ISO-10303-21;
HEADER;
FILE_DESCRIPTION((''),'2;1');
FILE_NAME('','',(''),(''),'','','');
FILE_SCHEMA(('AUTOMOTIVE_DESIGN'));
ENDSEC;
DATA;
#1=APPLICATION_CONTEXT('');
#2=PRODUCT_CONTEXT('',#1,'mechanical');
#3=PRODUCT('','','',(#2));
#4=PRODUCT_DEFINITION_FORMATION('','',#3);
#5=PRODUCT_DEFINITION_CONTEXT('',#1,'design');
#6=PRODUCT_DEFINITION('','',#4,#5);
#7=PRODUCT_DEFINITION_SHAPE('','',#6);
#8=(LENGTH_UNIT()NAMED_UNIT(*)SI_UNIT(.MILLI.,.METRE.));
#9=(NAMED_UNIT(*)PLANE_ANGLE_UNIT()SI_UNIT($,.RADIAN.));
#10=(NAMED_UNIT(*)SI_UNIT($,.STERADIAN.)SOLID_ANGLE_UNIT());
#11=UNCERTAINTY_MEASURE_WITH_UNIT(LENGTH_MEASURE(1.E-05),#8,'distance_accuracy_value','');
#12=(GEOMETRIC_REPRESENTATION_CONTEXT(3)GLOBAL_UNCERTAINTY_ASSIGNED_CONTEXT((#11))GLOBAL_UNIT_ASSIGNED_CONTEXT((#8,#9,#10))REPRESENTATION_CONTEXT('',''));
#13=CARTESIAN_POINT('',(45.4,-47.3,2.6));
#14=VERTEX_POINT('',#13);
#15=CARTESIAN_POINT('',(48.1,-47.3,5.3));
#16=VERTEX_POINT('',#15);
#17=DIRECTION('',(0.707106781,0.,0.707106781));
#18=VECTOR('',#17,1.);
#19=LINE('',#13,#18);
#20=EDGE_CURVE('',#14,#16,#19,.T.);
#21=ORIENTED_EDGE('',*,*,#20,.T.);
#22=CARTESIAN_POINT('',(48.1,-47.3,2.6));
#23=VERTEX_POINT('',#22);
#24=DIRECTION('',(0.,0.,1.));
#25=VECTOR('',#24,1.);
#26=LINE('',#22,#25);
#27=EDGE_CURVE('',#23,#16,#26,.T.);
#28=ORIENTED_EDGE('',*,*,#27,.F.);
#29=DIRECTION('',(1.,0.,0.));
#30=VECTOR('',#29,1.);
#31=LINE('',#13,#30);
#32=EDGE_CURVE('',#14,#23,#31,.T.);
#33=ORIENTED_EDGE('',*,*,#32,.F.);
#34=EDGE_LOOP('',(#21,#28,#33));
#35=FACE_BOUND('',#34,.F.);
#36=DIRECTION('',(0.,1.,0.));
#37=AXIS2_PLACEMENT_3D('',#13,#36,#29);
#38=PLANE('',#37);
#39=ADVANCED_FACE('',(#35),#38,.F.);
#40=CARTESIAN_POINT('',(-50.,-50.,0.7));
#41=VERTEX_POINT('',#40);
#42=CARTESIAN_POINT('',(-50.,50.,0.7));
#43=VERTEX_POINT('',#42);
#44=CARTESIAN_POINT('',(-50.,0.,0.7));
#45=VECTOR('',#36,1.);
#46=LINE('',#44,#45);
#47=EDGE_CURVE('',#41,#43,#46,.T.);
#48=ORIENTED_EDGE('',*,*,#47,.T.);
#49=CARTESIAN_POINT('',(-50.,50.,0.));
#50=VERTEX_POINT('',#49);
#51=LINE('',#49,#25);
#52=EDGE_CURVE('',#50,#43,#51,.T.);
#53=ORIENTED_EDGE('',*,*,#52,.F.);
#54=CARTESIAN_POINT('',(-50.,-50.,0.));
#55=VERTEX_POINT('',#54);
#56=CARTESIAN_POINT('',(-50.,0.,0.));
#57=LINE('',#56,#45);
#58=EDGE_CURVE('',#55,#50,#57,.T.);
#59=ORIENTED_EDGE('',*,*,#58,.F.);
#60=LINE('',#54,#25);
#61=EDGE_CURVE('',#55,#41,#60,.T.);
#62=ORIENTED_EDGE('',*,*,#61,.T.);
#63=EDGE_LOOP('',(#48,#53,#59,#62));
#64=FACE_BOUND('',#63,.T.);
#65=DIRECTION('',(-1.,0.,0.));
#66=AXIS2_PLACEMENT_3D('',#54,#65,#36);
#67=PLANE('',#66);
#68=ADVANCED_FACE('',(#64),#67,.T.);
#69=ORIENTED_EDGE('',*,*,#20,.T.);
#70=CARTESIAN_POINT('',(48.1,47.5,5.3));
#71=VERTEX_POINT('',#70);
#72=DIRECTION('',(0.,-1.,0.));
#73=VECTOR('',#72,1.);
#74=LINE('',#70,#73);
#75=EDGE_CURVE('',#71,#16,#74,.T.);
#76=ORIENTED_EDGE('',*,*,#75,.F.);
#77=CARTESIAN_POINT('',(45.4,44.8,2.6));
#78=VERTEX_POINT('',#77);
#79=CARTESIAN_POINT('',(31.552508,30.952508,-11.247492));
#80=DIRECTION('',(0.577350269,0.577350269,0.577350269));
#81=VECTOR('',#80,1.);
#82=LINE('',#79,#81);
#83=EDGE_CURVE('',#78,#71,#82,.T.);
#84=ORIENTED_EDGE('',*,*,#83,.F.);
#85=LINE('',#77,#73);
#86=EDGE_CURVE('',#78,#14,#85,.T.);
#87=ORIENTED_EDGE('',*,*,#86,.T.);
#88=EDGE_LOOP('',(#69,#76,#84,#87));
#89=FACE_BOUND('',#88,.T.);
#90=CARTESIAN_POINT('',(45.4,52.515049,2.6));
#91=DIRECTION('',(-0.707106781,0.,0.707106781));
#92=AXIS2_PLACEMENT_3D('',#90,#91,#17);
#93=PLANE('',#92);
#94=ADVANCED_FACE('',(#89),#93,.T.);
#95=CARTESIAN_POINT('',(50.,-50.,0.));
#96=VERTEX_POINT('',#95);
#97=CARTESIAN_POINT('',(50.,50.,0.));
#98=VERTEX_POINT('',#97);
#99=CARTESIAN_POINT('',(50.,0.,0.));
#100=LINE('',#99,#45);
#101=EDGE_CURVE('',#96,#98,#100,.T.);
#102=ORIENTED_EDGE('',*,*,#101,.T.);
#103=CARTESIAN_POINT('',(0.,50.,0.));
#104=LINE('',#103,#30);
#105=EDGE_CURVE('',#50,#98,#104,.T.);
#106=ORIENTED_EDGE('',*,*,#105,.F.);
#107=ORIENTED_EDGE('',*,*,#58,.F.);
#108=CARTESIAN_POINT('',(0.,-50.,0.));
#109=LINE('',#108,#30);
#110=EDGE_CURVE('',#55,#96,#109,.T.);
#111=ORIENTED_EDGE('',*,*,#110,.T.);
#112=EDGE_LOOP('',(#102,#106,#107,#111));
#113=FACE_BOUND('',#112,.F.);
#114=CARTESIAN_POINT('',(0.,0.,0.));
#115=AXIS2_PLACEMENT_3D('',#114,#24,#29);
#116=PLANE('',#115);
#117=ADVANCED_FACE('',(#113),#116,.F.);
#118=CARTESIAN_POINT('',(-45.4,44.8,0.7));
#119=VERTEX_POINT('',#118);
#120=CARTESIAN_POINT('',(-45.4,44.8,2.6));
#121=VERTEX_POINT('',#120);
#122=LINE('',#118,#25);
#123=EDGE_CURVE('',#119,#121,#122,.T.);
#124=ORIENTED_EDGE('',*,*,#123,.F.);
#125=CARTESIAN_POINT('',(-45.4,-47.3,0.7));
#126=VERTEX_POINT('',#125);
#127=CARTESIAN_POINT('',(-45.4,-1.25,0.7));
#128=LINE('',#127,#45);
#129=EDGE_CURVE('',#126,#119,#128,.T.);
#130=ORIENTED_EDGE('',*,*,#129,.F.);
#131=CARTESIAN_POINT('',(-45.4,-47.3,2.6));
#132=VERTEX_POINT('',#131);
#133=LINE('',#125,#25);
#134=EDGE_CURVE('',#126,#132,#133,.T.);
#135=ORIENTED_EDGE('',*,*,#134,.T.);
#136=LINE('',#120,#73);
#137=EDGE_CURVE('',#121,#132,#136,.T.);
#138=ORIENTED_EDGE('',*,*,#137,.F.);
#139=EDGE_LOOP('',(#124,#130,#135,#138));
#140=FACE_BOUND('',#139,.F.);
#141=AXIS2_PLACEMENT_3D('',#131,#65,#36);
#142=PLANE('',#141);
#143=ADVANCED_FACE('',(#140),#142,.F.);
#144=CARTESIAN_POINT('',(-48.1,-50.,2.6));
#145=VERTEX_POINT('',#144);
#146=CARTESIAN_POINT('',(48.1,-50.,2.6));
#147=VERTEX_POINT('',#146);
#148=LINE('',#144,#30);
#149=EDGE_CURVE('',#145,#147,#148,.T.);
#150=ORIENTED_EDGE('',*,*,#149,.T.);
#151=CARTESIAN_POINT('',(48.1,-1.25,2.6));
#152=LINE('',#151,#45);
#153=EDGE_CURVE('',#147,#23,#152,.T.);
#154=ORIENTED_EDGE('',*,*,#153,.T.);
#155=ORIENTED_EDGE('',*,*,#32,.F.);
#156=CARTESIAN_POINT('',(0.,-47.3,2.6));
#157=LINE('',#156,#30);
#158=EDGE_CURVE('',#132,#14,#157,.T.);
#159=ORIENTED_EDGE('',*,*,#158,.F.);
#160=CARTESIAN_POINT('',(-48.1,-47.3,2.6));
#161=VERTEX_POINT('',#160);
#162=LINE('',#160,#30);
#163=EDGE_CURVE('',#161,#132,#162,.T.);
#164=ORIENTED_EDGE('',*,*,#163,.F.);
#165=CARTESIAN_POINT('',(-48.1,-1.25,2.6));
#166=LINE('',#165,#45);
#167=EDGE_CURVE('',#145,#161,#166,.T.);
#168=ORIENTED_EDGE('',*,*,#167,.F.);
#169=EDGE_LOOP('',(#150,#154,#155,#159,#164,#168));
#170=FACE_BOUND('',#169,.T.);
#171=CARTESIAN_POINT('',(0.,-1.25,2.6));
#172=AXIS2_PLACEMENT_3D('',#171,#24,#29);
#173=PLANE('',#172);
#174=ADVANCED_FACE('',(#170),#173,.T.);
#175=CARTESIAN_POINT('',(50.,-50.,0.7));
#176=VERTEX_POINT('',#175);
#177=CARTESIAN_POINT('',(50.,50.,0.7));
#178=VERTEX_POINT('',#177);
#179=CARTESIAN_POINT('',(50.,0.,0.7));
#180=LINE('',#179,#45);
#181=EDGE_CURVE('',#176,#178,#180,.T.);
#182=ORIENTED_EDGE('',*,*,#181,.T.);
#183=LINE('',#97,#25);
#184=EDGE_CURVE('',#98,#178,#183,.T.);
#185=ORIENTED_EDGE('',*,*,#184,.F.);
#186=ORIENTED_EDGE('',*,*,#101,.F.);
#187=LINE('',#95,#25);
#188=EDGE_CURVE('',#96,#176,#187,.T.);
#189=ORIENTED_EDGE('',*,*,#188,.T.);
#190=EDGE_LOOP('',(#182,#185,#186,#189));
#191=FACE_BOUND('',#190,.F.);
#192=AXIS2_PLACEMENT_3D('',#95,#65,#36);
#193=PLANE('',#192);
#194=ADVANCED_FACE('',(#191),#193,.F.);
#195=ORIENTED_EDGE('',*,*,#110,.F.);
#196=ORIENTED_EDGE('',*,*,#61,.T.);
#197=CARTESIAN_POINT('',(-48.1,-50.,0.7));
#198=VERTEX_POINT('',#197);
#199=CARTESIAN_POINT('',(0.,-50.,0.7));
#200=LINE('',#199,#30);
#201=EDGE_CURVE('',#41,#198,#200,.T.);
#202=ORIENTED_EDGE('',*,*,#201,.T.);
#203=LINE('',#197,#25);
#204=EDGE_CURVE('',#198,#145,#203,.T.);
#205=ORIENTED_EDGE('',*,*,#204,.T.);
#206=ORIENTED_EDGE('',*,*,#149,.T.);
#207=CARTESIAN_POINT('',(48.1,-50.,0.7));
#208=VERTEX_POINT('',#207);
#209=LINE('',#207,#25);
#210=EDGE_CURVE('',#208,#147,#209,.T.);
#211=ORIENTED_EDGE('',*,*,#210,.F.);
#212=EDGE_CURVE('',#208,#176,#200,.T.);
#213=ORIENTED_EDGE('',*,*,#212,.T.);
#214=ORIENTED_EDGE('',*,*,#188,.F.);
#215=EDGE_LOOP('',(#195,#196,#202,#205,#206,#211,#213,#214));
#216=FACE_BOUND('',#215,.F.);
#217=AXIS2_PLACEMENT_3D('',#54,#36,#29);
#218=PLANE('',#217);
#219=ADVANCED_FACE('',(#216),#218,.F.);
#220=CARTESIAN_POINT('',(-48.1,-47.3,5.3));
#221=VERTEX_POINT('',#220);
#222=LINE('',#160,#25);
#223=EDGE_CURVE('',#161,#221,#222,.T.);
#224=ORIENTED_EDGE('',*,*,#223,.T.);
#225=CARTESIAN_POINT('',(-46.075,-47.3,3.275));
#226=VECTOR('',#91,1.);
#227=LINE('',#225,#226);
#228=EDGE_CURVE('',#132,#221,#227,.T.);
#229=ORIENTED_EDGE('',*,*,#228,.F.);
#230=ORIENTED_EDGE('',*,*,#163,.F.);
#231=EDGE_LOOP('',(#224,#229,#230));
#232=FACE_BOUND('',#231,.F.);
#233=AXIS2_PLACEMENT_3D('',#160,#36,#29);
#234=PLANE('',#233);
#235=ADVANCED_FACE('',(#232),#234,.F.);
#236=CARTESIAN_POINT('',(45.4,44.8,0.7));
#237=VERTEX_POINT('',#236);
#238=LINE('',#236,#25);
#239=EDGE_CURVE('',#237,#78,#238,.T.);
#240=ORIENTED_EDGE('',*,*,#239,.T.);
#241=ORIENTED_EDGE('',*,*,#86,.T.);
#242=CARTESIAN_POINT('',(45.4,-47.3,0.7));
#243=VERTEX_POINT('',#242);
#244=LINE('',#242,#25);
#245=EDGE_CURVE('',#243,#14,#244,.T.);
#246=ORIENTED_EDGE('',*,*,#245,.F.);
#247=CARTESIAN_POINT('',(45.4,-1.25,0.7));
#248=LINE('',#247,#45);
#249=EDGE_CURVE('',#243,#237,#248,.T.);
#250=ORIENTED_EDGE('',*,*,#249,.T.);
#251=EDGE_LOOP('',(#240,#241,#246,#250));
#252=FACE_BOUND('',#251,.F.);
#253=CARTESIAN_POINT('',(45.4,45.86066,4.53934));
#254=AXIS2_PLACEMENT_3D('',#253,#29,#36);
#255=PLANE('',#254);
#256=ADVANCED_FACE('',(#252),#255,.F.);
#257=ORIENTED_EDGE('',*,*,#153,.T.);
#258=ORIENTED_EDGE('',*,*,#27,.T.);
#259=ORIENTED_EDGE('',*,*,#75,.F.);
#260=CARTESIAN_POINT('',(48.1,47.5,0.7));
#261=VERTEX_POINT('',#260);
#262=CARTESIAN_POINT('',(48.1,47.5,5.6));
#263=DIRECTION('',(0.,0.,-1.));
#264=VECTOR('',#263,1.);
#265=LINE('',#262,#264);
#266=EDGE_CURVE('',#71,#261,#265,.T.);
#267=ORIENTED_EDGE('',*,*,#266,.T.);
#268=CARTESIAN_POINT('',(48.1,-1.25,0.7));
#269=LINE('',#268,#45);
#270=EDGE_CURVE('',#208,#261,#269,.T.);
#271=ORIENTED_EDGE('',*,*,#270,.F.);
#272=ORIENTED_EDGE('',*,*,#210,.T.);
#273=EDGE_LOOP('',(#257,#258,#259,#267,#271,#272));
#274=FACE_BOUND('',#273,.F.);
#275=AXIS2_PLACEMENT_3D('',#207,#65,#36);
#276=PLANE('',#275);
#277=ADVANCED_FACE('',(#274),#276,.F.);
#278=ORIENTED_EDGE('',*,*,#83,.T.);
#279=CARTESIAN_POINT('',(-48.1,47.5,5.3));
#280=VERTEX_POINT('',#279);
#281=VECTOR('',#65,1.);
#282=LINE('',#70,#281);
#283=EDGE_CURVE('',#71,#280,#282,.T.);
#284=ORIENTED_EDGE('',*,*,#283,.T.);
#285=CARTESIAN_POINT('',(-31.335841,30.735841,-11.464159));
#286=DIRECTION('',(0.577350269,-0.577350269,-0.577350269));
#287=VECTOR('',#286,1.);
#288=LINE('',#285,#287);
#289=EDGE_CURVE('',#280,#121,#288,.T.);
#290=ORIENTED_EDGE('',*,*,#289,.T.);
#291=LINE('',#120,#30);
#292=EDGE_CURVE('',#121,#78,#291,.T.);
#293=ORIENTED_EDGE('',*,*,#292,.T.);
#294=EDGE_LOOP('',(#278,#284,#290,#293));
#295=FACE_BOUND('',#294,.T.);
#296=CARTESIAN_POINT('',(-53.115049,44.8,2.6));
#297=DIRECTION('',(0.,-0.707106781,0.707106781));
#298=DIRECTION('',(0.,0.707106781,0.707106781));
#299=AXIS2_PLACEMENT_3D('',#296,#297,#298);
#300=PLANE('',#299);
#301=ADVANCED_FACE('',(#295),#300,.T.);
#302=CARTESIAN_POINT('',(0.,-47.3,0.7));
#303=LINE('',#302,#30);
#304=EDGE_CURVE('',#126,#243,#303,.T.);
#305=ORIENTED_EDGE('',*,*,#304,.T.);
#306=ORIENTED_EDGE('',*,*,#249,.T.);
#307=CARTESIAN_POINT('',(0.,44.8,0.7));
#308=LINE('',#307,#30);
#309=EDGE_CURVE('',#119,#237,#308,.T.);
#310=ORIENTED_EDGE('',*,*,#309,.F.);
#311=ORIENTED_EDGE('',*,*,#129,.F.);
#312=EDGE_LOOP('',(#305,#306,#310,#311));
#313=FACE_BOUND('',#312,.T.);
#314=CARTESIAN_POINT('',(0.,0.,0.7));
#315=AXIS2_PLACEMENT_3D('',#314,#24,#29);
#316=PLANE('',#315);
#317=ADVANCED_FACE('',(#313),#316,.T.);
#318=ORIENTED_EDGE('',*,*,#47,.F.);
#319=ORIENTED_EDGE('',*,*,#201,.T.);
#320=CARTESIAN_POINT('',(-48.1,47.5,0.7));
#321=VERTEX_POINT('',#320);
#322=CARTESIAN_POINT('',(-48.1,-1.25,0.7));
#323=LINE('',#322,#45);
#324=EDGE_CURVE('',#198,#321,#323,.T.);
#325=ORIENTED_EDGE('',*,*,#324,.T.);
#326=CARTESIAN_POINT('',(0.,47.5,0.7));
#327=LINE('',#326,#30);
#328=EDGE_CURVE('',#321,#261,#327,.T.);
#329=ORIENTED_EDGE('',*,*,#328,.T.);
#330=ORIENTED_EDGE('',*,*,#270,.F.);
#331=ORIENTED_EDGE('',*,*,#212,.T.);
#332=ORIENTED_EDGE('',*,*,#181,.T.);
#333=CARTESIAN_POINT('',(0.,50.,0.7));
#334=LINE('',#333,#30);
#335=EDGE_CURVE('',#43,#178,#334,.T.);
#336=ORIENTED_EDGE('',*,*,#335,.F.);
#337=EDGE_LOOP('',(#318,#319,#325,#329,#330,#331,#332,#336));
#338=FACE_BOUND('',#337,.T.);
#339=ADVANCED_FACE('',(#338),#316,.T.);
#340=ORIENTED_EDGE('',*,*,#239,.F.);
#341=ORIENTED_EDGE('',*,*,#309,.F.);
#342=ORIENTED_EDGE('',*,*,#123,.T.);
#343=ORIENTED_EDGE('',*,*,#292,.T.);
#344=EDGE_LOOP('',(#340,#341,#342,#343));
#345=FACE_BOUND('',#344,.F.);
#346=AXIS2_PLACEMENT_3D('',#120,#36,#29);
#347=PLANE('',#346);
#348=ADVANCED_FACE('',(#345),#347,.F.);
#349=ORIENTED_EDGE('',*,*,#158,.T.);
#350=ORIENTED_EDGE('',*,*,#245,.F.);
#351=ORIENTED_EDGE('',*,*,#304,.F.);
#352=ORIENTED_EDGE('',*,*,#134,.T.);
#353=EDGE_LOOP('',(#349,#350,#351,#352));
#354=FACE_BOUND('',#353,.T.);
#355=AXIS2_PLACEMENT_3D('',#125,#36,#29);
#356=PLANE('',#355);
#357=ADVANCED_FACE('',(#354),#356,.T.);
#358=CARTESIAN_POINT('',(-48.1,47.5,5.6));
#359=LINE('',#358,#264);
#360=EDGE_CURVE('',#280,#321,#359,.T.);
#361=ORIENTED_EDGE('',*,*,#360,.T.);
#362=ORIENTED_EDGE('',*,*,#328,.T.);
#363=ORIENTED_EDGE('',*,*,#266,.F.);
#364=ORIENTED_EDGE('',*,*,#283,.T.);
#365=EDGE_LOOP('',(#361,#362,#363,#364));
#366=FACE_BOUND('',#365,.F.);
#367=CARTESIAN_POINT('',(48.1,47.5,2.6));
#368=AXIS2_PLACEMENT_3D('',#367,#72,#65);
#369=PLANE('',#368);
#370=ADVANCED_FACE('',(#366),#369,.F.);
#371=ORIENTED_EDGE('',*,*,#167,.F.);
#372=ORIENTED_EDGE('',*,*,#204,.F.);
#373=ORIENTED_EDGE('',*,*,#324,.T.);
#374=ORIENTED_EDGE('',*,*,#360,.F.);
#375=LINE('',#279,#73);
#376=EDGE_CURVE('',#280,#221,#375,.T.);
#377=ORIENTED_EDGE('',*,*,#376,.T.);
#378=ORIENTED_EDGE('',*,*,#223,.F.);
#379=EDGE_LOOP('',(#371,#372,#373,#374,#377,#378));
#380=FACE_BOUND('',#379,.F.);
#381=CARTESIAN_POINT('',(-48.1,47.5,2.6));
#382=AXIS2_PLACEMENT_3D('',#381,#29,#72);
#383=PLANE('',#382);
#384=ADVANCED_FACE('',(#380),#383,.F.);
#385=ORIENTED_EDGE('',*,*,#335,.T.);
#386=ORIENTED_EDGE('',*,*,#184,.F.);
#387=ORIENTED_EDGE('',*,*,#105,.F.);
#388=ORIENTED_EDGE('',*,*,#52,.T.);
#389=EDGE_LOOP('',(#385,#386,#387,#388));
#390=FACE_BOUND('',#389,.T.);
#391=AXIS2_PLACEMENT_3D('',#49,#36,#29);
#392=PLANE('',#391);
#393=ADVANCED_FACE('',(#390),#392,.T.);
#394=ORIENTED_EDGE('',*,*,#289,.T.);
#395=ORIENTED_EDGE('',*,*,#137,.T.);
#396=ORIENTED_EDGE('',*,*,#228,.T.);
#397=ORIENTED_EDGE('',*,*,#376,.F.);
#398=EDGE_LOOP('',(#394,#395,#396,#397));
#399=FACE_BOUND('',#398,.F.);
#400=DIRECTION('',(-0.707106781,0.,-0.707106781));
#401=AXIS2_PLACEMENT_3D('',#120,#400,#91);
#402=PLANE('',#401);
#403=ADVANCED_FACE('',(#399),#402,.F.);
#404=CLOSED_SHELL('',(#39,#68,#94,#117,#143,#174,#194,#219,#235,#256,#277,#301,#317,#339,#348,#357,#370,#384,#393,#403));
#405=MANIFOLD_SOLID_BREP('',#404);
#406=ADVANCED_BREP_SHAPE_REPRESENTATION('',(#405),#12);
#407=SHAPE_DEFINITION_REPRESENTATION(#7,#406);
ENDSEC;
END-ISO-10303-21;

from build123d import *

# Parameters (mm, degrees)
F0_W         = 100
F0_H         = 100
F1_DEPTH     = 0.7
F2_W         = 96.2
F2_H         = 97.5
F2_W_2       = 90.8
F2_H_2       = 92.1
F3_DEPTH     = 1.9
F5_DEPTH     = 3
F6_T1_DEPTH  = 90.8
F6_T3_DEPTH  = 99.8150489639
F6_T9_DEPTH  = 99.8150489639
F6_T15_DEPTH = 98.5150489639
F6_T24_DEPTH = 99.8150489639
F6_T30_DEPTH = 98.5150489639


# Not quite as in the source:
# - a fillet or chamfer that OpenCascade refuses, or shapes differently, is made with other operations: its cross-section is extruded or revolved along the edge and cut away or added


with BuildPart() as f1:
    # F0 (on Top) → F1 (new body)
    with BuildSketch(Plane.XY):
        Rectangle(F0_W, F0_H)
    extrude(amount=F1_DEPTH)

    # F2 (on face) → F3 (join)
    with BuildSketch(Plane.XY.offset(0.7)):
        with Locations((0, -1.25)):
            Rectangle(F2_W, F2_H)
        with Locations((0, -1.25)):
            Rectangle(F2_W_2, F2_H_2, mode=Mode.SUBTRACT)
    extrude(amount=F3_DEPTH)

    # F4 (on face) → F5 (join)
    with BuildSketch(Plane.XY.offset(2.6)):
        Polygon((-48.1, -47.3), (-45.4, -47.3), (-45.4, 44.8), (45.4, 44.8), (45.4, -47.3), (48.1, -47.3), (48.1, 47.5), (-48.1, 47.5), align=None)
    extrude(amount=F5_DEPTH)

    # F6: chamfer of 3 on 3 edges, made by hand

    # F6_s2 → F6_t1 (cut)
    with BuildSketch(Plane.YZ.offset(-45.4)):
        Polygon((44.8, 2.6), (47.8, 5.6), (44.8, 5.6), align=None)
    extrude(amount=F6_T1_DEPTH, mode=Mode.SUBTRACT)

    # F6_s4 → F6_t3 (cut)
    with BuildSketch(Plane.XZ.offset(-44.8)):
        Polygon((-45.4, 2.6), (-48.4, 5.6), (-45.4, 5.6), align=None)
        Polygon((45.4, 2.6), (48.4, 5.6), (45.4, 5.6), align=None)
    extrude(amount=F6_T3_DEPTH, mode=Mode.SUBTRACT)


with BuildPart() as f6_tool7:
    # F6_s8 → F6_t9 (new body)
    with BuildSketch(Plane.XZ.offset(47.3)):
        Polygon((-45.4, 2.6), (-48.4, 5.6), (-45.4, 5.6), align=None)
    extrude(amount=-F6_T9_DEPTH)

    split(bisect_by=Plane.YZ.offset(-48.1), keep=Keep.TOP)

    split(bisect_by=Plane.XZ.offset(-44.8), keep=Keep.BOTTOM)

    split(bisect_by=Plane.XZ.offset(-47.5), keep=Keep.TOP)


with BuildPart() as f6_tool13:
    # F6_s14 → F6_t15 (new body)
    with BuildSketch(Plane.YZ.offset(-53.1150489639)):
        Polygon((44.8, 2.6), (47.8, 5.6), (44.8, 5.6), align=None)
    extrude(amount=F6_T15_DEPTH)

    split(bisect_by=Plane.YZ.offset(-48.1), keep=Keep.TOP)

    split(bisect_by=Plane.YZ.offset(-45.4), keep=Keep.BOTTOM)

    split(bisect_by=Plane.XZ.offset(-47.5), keep=Keep.TOP)


with BuildPart() as f6_tool7_1:
    add(f6_tool7.part)

    # F6_t19: intersect F6_tool13
    add(f6_tool13.part, mode=Mode.INTERSECT)


with BuildPart() as f1_1:
    add(f1.part)

    # F6_t5: cut F6_tool7
    add(f6_tool7_1.part, mode=Mode.SUBTRACT)


with BuildPart() as f6_tool22:
    # F6_s23 → F6_t24 (new body)
    with BuildSketch(Plane.XZ.offset(-52.5150489639)):
        Polygon((45.4, 2.6), (48.4, 5.6), (45.4, 5.6), align=None)
    extrude(amount=F6_T24_DEPTH)

    split(bisect_by=Plane.XZ.offset(-44.8), keep=Keep.BOTTOM)

    split(bisect_by=Plane.XZ.offset(-47.5), keep=Keep.TOP)

    split(bisect_by=Plane.YZ.offset(48.1), keep=Keep.BOTTOM)


with BuildPart() as f6_tool28:
    # F6_s29 → F6_t30 (new body)
    with BuildSketch(Plane.YZ.offset(-45.4)):
        Polygon((44.8, 2.6), (47.8, 5.6), (44.8, 5.6), align=None)
    extrude(amount=F6_T30_DEPTH)

    split(bisect_by=Plane.YZ.offset(45.4), keep=Keep.TOP)

    split(bisect_by=Plane.XZ.offset(-47.5), keep=Keep.TOP)

    split(bisect_by=Plane.YZ.offset(48.1), keep=Keep.BOTTOM)


with BuildPart() as f6_tool22_1:
    add(f6_tool22.part)

    # F6_t34: intersect F6_tool28
    add(f6_tool28.part, mode=Mode.INTERSECT)


with BuildPart() as f1_2:
    add(f1_1.part)

    # F6_t20: cut F6_tool22
    add(f6_tool22_1.part, mode=Mode.SUBTRACT)


solid = f1_2.part
